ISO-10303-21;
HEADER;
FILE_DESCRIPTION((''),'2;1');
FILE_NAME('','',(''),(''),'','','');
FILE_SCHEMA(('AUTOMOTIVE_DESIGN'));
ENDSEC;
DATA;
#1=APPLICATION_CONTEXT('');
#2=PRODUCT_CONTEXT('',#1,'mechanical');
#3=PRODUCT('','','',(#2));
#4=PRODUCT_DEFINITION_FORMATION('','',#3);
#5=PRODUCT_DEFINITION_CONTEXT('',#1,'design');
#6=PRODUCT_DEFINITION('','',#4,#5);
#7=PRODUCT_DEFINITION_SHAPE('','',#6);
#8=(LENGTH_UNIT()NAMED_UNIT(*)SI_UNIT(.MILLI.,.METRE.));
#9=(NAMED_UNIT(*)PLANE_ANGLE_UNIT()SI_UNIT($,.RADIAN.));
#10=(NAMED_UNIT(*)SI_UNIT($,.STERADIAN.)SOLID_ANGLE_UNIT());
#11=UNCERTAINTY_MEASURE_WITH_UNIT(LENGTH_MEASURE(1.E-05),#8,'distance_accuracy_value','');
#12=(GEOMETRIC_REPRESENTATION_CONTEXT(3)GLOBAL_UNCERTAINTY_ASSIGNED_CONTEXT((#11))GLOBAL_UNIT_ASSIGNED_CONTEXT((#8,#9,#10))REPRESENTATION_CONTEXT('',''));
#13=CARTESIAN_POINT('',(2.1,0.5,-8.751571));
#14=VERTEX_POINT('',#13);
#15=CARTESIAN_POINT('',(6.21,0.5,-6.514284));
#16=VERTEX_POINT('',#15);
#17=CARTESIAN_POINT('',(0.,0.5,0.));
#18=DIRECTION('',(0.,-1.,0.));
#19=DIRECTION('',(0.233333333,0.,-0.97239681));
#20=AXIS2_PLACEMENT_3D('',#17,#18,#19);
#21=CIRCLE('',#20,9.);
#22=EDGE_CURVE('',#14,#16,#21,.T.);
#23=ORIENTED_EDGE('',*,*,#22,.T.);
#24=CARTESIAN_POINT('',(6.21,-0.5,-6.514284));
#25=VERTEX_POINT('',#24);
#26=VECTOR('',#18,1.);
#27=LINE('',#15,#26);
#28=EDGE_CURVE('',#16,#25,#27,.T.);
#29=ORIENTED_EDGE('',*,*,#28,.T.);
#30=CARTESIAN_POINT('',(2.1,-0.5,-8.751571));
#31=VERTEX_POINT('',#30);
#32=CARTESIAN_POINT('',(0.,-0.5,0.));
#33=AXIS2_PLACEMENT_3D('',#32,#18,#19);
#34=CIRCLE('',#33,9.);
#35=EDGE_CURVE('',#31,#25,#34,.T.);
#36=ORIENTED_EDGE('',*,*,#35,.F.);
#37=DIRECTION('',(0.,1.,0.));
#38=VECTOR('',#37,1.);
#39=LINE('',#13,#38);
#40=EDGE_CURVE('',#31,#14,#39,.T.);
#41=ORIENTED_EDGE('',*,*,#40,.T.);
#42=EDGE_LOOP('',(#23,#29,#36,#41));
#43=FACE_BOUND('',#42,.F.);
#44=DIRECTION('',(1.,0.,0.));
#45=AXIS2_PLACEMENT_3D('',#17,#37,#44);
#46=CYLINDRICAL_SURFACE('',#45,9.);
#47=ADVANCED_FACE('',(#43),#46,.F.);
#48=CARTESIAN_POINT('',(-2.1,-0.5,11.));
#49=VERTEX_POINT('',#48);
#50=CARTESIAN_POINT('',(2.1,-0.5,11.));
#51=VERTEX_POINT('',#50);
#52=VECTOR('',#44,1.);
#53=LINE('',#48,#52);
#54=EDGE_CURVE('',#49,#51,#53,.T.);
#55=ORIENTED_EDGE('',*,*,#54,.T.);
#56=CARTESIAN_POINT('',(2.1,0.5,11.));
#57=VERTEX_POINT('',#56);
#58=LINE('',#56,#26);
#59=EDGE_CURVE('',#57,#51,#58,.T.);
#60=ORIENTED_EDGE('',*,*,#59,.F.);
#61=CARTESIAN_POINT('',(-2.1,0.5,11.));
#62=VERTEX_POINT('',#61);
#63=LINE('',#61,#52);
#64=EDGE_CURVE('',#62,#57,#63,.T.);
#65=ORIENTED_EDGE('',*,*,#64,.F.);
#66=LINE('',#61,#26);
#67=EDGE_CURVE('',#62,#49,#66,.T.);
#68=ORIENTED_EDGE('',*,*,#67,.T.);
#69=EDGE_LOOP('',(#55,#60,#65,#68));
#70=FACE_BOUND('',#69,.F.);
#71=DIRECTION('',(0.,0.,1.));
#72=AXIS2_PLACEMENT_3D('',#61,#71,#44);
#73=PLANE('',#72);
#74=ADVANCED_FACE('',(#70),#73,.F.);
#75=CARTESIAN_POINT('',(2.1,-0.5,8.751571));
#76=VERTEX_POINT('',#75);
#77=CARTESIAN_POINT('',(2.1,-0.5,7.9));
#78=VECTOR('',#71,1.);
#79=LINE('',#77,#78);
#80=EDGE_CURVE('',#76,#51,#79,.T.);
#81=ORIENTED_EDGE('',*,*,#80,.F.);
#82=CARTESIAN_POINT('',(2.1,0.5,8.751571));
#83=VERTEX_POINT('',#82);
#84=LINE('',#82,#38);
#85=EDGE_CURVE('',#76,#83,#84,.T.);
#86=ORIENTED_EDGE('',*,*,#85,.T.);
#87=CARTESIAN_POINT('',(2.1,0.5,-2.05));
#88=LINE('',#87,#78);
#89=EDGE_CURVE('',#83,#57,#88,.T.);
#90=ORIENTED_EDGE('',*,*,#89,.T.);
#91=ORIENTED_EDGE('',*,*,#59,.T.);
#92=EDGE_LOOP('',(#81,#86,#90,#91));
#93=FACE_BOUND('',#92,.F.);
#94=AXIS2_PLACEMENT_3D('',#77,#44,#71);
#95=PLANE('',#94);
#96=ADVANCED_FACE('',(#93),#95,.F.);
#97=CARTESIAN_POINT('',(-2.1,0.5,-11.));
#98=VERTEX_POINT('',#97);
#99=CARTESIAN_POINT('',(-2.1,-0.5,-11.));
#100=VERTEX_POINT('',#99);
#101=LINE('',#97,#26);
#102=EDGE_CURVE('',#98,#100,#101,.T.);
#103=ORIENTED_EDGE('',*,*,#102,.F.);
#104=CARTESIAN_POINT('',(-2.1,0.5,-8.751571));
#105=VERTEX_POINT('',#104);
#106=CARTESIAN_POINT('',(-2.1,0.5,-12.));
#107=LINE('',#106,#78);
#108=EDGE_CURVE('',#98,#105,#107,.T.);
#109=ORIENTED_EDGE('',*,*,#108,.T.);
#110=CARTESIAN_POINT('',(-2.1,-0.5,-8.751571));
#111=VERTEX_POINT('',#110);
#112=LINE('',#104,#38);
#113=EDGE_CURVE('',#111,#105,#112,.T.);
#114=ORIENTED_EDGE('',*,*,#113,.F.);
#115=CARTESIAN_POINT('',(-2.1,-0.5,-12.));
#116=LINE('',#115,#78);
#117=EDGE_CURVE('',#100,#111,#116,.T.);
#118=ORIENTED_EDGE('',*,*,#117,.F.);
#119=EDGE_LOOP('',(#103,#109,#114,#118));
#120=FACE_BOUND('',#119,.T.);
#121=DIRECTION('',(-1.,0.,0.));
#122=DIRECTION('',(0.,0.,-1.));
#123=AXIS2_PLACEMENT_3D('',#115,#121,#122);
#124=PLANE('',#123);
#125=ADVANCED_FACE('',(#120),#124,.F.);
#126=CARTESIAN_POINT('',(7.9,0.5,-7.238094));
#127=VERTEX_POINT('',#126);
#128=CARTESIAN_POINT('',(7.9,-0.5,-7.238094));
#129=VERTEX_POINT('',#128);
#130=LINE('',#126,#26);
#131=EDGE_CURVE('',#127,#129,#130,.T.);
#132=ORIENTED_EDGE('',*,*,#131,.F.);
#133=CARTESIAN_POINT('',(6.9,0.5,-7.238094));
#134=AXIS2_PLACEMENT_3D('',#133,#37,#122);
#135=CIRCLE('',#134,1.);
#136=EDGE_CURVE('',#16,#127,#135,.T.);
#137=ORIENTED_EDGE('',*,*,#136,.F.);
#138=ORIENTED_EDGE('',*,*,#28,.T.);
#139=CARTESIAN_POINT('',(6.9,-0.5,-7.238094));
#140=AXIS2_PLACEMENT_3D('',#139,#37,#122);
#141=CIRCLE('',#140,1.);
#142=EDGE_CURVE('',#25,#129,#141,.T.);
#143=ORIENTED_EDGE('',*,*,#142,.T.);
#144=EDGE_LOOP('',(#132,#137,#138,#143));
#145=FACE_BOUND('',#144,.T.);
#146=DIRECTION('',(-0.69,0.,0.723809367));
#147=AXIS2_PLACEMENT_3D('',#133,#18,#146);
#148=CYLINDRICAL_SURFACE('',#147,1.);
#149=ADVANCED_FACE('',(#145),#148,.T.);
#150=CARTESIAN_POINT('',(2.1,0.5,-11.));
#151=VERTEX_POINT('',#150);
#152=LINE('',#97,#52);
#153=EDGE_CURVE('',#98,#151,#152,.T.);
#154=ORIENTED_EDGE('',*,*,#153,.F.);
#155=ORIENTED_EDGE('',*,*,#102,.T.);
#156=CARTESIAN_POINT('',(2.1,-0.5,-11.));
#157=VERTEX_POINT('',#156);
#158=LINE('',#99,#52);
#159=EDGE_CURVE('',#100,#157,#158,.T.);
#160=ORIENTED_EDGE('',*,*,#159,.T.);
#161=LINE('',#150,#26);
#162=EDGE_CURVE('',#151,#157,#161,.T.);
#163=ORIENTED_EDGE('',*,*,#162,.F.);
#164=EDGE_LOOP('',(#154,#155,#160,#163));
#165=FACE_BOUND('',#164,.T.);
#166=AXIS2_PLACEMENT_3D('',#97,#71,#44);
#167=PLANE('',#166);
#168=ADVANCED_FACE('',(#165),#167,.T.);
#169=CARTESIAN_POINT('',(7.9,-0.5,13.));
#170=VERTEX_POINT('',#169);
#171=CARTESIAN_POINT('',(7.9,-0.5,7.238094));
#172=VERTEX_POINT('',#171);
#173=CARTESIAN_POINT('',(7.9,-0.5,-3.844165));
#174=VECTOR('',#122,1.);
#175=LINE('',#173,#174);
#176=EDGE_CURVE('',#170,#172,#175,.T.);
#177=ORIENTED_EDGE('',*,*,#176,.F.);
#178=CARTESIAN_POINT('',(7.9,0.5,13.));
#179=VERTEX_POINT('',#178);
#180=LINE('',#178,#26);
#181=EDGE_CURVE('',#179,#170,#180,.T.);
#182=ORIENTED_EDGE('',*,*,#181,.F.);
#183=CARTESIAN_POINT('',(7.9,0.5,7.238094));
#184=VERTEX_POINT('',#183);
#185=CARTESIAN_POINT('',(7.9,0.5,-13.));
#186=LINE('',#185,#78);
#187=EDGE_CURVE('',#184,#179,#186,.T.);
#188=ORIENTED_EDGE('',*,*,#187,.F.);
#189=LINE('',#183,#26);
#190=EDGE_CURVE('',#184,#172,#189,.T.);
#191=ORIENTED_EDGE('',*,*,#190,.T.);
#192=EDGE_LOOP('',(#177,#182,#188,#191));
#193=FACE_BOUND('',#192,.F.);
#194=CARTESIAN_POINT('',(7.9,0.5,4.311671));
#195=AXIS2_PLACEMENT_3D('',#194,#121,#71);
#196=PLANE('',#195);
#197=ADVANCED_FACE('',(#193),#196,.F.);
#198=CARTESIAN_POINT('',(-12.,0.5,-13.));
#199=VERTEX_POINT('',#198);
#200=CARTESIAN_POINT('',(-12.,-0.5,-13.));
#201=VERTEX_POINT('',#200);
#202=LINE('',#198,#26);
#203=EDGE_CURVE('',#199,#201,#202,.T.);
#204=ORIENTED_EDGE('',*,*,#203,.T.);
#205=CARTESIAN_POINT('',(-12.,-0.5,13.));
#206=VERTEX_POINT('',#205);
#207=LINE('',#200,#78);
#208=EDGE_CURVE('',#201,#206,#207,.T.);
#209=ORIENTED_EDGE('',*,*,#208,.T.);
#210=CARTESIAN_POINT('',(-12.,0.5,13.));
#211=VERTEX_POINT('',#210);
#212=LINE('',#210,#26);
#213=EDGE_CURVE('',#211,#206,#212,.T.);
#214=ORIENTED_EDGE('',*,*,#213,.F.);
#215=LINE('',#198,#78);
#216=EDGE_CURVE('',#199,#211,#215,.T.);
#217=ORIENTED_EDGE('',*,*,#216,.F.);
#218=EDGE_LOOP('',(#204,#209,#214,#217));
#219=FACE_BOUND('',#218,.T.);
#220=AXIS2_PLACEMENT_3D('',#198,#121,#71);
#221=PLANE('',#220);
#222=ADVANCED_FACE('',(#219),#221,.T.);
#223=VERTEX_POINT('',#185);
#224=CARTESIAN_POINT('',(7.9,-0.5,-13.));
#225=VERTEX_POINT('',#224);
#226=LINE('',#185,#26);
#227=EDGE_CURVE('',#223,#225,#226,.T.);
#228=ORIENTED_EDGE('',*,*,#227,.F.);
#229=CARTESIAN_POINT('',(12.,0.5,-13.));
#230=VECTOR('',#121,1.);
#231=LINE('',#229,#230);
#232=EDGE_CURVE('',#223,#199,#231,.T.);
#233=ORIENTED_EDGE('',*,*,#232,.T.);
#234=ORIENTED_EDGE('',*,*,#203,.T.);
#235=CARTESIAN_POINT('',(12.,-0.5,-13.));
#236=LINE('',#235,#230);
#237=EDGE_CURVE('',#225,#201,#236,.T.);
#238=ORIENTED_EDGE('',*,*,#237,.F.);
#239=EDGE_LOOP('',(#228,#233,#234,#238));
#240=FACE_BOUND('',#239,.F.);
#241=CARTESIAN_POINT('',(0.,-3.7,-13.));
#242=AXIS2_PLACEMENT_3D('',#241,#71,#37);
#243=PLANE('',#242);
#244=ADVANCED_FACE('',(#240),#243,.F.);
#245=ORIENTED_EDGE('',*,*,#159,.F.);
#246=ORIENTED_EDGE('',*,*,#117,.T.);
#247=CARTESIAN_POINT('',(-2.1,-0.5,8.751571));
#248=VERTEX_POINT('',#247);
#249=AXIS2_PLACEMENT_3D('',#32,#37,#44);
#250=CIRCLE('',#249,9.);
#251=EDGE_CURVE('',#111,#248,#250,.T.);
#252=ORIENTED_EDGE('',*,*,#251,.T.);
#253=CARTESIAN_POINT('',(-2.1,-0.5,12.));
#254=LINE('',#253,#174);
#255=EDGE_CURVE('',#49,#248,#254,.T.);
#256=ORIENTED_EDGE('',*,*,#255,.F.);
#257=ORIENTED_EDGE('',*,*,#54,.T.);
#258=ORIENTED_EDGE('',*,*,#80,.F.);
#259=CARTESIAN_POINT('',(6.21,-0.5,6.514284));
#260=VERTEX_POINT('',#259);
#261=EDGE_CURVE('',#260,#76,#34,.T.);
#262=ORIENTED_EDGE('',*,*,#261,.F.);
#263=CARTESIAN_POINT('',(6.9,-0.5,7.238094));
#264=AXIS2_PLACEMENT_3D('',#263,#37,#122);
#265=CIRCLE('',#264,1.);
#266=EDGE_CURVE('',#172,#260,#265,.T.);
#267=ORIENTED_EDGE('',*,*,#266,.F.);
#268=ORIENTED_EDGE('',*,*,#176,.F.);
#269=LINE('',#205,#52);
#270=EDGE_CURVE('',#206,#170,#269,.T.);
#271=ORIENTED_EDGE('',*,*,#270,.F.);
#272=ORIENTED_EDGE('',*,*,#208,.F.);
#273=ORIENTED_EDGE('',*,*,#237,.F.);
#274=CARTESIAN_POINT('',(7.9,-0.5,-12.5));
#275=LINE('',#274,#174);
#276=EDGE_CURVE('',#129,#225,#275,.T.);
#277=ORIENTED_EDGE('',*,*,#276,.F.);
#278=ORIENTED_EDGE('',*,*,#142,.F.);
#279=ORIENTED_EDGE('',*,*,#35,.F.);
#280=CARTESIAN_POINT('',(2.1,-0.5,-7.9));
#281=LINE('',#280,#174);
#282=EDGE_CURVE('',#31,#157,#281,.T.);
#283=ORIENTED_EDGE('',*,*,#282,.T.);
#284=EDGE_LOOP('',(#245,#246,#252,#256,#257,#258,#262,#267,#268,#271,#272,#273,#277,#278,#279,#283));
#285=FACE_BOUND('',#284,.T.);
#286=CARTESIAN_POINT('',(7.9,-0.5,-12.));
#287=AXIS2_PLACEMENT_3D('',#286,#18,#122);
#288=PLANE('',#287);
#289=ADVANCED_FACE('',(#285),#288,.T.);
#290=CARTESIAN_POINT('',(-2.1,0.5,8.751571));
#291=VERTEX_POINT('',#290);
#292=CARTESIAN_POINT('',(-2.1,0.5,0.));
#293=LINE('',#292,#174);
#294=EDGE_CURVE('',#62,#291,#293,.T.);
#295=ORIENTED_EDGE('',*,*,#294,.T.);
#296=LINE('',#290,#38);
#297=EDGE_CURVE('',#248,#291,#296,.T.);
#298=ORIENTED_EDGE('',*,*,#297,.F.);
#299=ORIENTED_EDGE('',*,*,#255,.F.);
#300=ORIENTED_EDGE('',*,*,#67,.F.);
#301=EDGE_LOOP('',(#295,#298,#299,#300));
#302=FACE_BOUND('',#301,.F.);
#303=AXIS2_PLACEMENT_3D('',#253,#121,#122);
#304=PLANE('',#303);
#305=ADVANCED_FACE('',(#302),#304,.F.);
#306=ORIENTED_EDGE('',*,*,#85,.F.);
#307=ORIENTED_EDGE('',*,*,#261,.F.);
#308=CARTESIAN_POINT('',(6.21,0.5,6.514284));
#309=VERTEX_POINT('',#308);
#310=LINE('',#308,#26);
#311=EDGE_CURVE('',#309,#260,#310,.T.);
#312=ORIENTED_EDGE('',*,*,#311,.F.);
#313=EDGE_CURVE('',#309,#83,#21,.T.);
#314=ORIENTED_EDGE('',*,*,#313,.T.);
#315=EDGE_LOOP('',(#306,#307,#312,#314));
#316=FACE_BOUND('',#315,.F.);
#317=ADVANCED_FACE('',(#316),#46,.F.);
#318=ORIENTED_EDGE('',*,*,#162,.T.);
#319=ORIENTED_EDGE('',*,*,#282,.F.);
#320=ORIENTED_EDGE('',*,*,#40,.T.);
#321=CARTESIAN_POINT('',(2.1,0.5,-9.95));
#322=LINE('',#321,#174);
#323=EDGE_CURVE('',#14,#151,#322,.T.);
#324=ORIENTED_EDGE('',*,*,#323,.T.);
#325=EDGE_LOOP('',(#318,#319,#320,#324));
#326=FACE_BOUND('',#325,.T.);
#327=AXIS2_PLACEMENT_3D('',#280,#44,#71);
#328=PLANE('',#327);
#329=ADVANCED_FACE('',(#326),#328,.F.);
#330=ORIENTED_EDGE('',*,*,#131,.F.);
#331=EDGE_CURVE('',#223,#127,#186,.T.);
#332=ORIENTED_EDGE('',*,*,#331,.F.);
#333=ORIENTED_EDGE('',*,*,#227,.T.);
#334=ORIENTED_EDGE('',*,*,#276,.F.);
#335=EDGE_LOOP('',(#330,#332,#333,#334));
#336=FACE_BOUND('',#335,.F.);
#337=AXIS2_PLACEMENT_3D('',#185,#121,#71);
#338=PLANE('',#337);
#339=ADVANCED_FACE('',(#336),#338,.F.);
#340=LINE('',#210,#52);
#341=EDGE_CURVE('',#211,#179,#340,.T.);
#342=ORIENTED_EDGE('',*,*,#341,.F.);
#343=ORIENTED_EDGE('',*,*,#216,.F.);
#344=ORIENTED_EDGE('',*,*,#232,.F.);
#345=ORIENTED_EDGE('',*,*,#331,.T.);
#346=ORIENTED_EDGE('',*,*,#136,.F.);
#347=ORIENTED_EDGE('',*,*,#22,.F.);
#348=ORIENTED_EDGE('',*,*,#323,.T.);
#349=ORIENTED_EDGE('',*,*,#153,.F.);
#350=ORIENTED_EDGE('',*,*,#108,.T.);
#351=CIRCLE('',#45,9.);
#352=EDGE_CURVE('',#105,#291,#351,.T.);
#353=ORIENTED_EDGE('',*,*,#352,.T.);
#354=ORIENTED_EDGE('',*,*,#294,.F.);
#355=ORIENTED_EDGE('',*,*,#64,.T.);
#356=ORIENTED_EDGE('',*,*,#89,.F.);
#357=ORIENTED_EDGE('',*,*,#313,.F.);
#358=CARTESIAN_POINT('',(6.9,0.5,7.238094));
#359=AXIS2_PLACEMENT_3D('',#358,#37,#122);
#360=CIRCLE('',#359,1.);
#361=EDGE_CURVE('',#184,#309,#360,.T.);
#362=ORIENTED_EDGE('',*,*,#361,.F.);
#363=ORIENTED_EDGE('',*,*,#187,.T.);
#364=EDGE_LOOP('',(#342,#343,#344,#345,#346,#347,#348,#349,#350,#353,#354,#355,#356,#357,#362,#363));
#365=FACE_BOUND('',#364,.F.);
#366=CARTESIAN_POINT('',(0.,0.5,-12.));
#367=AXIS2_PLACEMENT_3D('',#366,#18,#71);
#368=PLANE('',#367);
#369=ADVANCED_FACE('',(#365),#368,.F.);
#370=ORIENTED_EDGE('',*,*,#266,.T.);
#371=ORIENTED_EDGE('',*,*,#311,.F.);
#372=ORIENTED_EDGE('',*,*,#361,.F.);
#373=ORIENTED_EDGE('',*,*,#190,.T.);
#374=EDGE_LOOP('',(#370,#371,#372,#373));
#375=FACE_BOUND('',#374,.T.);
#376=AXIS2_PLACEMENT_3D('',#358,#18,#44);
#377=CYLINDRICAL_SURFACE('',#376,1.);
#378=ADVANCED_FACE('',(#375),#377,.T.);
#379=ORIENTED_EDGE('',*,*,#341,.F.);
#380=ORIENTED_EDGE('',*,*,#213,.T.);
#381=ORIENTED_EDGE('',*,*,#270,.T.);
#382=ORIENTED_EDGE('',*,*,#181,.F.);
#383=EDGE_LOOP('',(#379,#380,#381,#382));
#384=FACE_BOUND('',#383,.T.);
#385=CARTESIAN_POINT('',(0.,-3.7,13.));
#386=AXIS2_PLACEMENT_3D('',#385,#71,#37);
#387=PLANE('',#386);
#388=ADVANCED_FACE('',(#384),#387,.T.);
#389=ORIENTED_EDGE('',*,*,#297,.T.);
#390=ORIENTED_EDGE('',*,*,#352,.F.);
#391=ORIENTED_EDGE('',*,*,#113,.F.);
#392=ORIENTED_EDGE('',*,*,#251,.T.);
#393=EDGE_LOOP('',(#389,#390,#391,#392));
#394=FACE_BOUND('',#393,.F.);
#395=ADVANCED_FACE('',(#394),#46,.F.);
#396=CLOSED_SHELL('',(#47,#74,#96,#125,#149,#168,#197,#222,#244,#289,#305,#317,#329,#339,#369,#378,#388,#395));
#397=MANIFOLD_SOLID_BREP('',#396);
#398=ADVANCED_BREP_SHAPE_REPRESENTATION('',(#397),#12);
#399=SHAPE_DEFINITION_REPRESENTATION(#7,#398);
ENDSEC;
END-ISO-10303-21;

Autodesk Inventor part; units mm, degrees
ref_plane "YZ Plane" through (0, 0, 0) normal (1, 0, 0) x (0, 1, 0)
ref_plane "XZ Plane" through (0, 0, 0) normal (0, 1, 0) x (-1, 0, 0)
ref_plane "XY Plane" through (0, 0, 0) normal (0, 0, 1) x (1, 0, 0)
sketch "Esquisse1" plane through (0, 0, 0) normal (1, 0, 0) x (0, 1, 0)
  line L0 (0.5, 12) -> (-0.5, 12)
  line L1 (-0.5, 12) -> (-0.5, -12)
  line L2 (-0.5, -12) -> (0.5, -12)
  line L3 (0.5, -12) -> (0.5, 12)
  line L4 (0.5, 12) -> (-0.5, -12) construction
  line L5 (-0.5, 12) -> (0.5, -12) construction
  line L6 (0.5, -12) -> (-4.7, -12)
  line L7 (-4.7, -12) -> (-4.7, -13)
  line L8 (-4.7, -13) -> (0.5, -13)
  line L9 (0.5, -13) -> (0.5, -12)
  line L10 (0.5, 12) -> (-4.7, 12)
  line L11 (-4.7, 12) -> (-4.7, 13)
  line L12 (-4.7, 13) -> (0.5, 13)
  line L13 (0.5, 13) -> (0.5, 12)
  line L14 (-4.7, -13) -> (-3.7, -13)
  line L15 (-3.7, -13) -> (-3.7, -21)
  line L16 (-3.7, -21) -> (-4.7, -21)
  line L17 (-4.7, -21) -> (-4.7, -13)
  line L18 (-4.7, 13) -> (-3.7, 13)
  line L19 (-3.7, 13) -> (-3.7, 21)
  line L20 (-3.7, 21) -> (-4.7, 21)
  line L21 (-4.7, 21) -> (-4.7, 13)
  point P0 (0, 0)
  dimension "d0" = 24
  dimension "d1" = 1
  dimension "d2" = 8
  dimension "d3" = 4.2
extrude "Extrusion1" add sketch "Esquisse1" along normal mid plane 15.8
sketch "Esquisse2" plane through (-7.9, -0.5, -12) normal (0, -1, 0) x (1, 0, 0)
  circle A0 centre (7.9, 19.9) radius 2.1
  line L0 (7.9, 19.9) -> (7.9, 12) construction
  line L1 (7.9, 12) -> (7.9, 4.1) construction
  line L2 (10, 19.9) -> (10, 24)
  line L3 (0, 24) -> (15.8, 24) projected
  line L4 (5.8, 24) -> (5.8, 19.9)
  line L5 (10, 19.9) -> (5.8, 19.9) construction
  dimension "d6" = 15.8
  dimension "d7" = 4.2
extrude "Extrusion2" cut sketch "Esquisse2" against normal through all
sketch "Esquisse3" plane through (-7.9, -3.7, 21) normal (0, 1, 0) x (1, 0, 0)
  circle A0 centre (7.9, 4) radius 1.6
  line L0 (0, 0) -> (15.8, 0) construction
  line L1 (7.9, 0) -> (7.9, 4) construction
  line L2 (7.9, 4) -> (7.9, 8) construction
  line L3 (0, 8) -> (15.8, 8) construction
  point P0 (7.9, 21)
  dimension "d10" = 3.2
extrude "Extrusion3" cut sketch "Esquisse3" against normal through all
mirror "Symétrie2" about plane through (0, 0, 0) normal (0, 0, 1) of "Extrusion2", "Extrusion3"
sketch "Sketch4" plane through (7.9, 0, 0) normal (1, 0, 0) x (0, 0, -1)
  line L0 (13, 0.5) -> (-13, 0.5) projected
  line L1 (-13, 0.5) -> (-13, -3.7) projected
  line L2 (-13, -3.7) -> (-21, -3.7) projected
  line L3 (-21, -3.7) -> (-21, -4.7) projected
  line L4 (-21, -4.7) -> (-12, -4.7) projected
  line L5 (-12, -4.7) -> (-12, -0.5) projected
  line L6 (-12, -0.5) -> (12, -0.5) projected
  line L7 (12, -0.5) -> (12, -4.7) projected
  line L8 (12, -4.7) -> (21, -4.7) projected
  line L9 (21, -4.7) -> (21, -3.7) projected
  line L10 (21, -3.7) -> (13, -3.7) projected
  line L11 (13, -3.7) -> (13, 0.5) projected
  line L12 (-12, -0.5) -> (-13, -0.5)
  line L13 (12, -0.5) -> (13, -0.5)
  point P0 (0, 0)
extrude "Extrusion4" cut sketch "Sketch4" against normal through all contours L11 L10 L9 L8 L7 L13 | L12 L5 L4 L3 L2 L1
sketch "Sketch5" plane through (-7.9, 0.5, 13) normal (0, 1, 0) x (1, 0, 0)
  line L0 (-4.1, 0) -> (19.9, 0)
  line L1 (19.9, 0) -> (19.9, 26)
  line L2 (19.9, 26) -> (-4.1, 26)
  line L3 (-4.1, 26) -> (-4.1, 0)
  line L4 (-4.1, 0) -> (19.9, 26) construction
  line L5 (19.9, 0) -> (-4.1, 26) construction
  arc A0 (5.8, 20.9) -> (10, 20.9) centre (7.9, 20.9) ccw projected
  line L6 (5.8, 20.9) -> (5.8, 25) projected
  line L7 (5.8, 25) -> (10, 25) projected
  line L8 (10, 25) -> (10, 20.9) projected
  line L9 (10, 1) -> (5.8, 1) projected
  line L10 (5.8, 1) -> (5.8, 5.1) projected
  arc A1 (10, 5.1) -> (5.8, 5.1) centre (7.9, 5.1) ccw projected
  line L11 (10, 5.1) -> (10, 1) projected
  line L12 (0, 0) -> (15.8, 0) projected
  line L13 (15.8, 26) -> (15.8, 0) projected
  line L14 (15.8, 26) -> (0, 26) projected
  line L15 (0, 0) -> (0, 26) projected
  point P0 (7.9, 13)
  dimension "d16" = 24
  dimension "d22" = 26
extrude "Extrusion5" add sketch "Sketch5" against normal up to surface (1 mm away) contours L3 L2 L15 L0 | L13 L2 L1 L0
sketch "Sketch7" plane through (-12, 0.5, -13) normal (0, 1, 0) x (1, 0, 0)
  circle A0 centre (12, -13) radius 9
  dimension "d23" = 18
extrude "Extrusion7" cut sketch "Sketch7" against normal through all
sketch "Sketch8" plane through (12, 0.5, 13) normal (0, 1, 0) x (1, 0, 0)
  line L0 (-24, 0) -> (0, 0) projected
  line L1 (0, 0) -> (0, 26) projected
  line L2 (0, 26) -> (-24, 26) projected
  line L3 (-24, 26) -> (-24, 0) projected
  arc A0 (-9.9, 4.2484) -> (-9.9, 21.7516) centre (-12, 13) ccw projected
  line L4 (-9.9, 4.2484) -> (-9.9, 1) projected
  line L5 (-9.9, 1) -> (-14.1, 1) projected
  line L6 (-14.1, 1) -> (-14.1, 4.2484) projected
  arc A1 (-14.1, 21.7516) -> (-14.1, 4.2484) centre (-12, 13) ccw projected
  line L7 (-14.1, 21.7516) -> (-14.1, 25) projected
  line L8 (-14.1, 25) -> (-9.9, 25) projected
  line L9 (-9.9, 25) -> (-9.9, 21.7516) projected
  line L10 (-14.1, 2) -> (-9.9, 2)
  line L11 (-14.1, 24) -> (-9.9, 24)
  line L12 (-12, 2) -> (-12, 1) construction
  line L13 (-12, 24) -> (-12, 25) construction
  point P0 (-14.1, 24)
  dimension "d27" = 1
extrude "Extrusion9" add sketch "Sketch8" against normal up to surface (1 mm away) contours L4 L5 L6 L10 | L11 L7 L8 L9
sketch "Sketch9" plane through (12, 0.5, 13) normal (0, 1, 0) x (1, 0, 0)
  line L0 (-24, 0) -> (0, 0) projected
  line L1 (0, 0) -> (0, 26) projected
  line L2 (0, 26) -> (-24, 26) projected
  line L3 (-24, 26) -> (-24, 0) projected
  arc A0 (-9.9, 4.2484) -> (-9.9, 21.7516) centre (-12, 13) ccw projected
  line L4 (-9.9, 4.2484) -> (-9.9, 2) projected
  line L5 (-9.9, 2) -> (-14.1, 2) projected
  line L6 (-14.1, 2) -> (-14.1, 4.2484) projected
  arc A1 (-14.1, 21.7516) -> (-14.1, 4.2484) centre (-12, 13) ccw projected
  line L7 (-14.1, 21.7516) -> (-14.1, 24) projected
  line L8 (-14.1, 24) -> (-9.9, 24) projected
  line L9 (-9.9, 24) -> (-9.9, 21.7516) projected
  line L10 (0, 26) -> (-4.1, 26)
  line L11 (-4.1, 26) -> (-4.1, 0)
  line L12 (-4.1, 0) -> (0, 0)
  line L13 (0, 0) -> (0, 26)
  point P0 (-4.1, 8.6884)
  point P1 (-4.1, 17.3116)
  dimension "d32" = 4.1
extrude "Extrusion10" cut sketch "Sketch9" against normal through all contours L11 A0 L2 L1 L0
fillet "Fillet3" radius 1 2 edges at (7.9, 0, 4.3116) (7.9, 0, -4.3116)
properties part number "Adapt_Roue_libre"
